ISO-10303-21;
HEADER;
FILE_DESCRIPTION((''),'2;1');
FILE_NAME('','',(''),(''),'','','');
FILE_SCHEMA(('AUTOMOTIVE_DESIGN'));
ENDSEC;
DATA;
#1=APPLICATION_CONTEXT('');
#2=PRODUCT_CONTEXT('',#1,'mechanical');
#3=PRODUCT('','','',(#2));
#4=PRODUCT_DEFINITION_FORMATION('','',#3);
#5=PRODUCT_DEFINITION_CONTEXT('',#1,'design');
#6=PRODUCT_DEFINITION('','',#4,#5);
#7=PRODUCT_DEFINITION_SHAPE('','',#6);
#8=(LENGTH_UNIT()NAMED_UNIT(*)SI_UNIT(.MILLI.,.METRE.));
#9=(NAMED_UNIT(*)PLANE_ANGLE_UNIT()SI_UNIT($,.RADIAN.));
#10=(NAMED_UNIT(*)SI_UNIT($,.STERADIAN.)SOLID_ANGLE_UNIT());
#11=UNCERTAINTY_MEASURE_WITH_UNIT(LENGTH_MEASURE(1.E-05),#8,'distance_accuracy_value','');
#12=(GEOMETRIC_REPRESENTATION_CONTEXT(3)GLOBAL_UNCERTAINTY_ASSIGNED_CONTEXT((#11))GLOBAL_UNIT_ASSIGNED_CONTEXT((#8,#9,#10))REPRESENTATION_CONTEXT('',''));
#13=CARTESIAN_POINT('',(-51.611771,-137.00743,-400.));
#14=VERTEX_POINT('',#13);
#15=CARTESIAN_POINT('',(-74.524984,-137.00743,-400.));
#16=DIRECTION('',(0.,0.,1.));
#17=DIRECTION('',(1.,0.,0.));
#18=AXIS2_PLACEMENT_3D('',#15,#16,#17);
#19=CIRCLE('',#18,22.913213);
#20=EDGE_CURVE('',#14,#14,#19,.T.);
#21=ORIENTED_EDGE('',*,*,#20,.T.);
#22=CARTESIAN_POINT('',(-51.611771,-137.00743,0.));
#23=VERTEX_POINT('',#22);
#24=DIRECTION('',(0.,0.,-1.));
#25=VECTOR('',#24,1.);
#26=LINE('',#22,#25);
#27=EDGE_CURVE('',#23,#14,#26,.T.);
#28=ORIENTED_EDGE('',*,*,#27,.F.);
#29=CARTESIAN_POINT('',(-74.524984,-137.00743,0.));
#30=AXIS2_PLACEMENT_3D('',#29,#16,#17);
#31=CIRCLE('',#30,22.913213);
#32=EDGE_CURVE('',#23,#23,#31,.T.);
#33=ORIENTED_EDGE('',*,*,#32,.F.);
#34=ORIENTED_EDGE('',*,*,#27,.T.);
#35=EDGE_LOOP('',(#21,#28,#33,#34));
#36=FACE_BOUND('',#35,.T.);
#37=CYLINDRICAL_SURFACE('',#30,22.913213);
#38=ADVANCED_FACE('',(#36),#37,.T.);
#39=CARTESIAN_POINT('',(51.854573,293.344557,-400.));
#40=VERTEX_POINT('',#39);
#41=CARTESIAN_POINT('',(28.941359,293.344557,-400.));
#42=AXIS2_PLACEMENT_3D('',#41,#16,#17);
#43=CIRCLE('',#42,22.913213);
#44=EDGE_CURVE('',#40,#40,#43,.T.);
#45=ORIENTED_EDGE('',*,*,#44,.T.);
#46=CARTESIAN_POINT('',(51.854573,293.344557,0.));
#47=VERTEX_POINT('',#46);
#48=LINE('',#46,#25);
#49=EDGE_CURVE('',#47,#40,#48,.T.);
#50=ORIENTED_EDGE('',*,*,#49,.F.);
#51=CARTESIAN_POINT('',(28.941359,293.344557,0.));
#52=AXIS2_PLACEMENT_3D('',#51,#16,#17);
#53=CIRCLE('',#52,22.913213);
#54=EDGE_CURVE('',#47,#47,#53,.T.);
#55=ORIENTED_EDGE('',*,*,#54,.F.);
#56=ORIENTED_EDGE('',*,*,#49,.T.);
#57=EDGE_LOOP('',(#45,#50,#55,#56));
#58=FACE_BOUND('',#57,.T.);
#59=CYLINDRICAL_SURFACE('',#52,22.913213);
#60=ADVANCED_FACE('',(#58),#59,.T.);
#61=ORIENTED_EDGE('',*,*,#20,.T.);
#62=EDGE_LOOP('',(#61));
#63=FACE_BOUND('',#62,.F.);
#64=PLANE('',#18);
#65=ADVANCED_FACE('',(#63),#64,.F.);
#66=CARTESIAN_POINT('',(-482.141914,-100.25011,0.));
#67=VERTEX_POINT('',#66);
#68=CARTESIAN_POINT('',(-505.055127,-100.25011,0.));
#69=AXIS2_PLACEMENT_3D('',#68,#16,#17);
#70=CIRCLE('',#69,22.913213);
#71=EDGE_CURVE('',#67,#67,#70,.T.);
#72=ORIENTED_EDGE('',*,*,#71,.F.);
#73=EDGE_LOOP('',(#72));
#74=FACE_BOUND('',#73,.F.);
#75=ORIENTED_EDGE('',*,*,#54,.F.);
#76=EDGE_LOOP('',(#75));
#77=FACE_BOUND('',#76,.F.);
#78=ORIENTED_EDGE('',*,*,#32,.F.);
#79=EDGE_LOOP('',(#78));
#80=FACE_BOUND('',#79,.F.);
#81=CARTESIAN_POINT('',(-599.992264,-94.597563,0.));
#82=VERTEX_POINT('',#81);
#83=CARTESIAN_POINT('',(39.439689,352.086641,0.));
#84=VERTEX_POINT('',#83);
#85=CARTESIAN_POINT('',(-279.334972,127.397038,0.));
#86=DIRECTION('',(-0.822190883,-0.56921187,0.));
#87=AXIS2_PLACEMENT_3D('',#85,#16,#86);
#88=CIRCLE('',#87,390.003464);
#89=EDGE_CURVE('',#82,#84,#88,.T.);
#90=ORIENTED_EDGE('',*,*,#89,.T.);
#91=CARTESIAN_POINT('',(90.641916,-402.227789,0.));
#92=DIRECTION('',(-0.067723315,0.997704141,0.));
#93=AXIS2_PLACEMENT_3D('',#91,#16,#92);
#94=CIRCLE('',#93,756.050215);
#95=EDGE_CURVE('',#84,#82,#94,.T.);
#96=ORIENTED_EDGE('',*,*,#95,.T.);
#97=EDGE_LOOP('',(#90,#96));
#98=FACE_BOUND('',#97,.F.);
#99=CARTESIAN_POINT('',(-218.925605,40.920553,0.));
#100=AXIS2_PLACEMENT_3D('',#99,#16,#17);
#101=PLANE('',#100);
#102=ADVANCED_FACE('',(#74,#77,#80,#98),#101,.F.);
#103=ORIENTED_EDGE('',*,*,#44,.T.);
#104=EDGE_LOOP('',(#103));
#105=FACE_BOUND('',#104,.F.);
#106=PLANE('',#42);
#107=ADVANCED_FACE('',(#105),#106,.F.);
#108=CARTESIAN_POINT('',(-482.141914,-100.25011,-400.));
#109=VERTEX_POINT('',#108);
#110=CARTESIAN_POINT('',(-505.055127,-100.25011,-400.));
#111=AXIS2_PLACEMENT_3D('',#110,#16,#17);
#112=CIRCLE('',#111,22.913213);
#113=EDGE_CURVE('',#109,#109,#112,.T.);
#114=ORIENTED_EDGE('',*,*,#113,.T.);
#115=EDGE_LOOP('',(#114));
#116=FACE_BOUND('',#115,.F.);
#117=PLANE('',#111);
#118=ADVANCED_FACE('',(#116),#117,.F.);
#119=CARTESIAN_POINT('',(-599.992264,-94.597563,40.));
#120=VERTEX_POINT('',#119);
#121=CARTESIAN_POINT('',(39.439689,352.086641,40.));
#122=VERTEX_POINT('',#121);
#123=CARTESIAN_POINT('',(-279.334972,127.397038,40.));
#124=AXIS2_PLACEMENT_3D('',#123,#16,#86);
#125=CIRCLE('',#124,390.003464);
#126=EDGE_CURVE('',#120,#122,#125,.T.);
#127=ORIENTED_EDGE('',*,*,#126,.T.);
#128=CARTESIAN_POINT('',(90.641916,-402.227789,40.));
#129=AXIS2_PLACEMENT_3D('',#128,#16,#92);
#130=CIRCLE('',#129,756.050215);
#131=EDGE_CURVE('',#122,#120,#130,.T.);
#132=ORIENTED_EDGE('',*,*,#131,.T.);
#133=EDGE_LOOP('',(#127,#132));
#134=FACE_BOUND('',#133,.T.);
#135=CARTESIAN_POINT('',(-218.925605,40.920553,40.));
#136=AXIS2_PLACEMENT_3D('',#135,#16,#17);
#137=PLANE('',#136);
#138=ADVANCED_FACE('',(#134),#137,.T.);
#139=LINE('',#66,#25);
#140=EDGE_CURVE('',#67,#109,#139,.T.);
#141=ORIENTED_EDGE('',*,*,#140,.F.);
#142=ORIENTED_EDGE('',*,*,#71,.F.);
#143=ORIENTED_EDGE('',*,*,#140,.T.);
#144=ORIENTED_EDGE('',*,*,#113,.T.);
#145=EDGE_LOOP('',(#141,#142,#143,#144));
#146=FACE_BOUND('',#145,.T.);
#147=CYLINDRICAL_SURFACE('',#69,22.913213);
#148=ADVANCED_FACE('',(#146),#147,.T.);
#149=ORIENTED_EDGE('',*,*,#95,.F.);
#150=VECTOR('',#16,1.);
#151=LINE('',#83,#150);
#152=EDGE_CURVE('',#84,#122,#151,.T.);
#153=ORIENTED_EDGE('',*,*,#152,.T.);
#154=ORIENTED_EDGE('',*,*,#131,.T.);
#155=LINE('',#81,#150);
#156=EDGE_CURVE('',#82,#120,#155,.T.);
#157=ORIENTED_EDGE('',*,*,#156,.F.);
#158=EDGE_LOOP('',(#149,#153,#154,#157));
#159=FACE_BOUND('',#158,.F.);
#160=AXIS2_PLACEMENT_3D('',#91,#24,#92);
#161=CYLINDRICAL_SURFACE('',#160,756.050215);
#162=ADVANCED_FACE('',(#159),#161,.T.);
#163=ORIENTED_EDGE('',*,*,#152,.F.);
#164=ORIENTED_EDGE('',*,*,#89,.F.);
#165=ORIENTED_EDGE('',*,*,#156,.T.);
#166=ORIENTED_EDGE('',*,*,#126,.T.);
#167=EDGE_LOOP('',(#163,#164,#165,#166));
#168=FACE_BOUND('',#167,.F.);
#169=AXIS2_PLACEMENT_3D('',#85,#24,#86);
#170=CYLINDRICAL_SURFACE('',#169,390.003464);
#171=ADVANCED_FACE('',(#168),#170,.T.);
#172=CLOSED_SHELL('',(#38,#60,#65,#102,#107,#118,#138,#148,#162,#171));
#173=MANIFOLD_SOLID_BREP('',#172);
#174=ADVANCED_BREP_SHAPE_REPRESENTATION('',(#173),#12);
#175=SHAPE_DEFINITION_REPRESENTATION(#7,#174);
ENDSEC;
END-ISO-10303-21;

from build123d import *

# Parameters (mm, degrees)
F0_R     = 22.9132131763
F1_DEPTH = 40
F2_DEPTH = 400


# Not quite as in the source:
# - a feature names something its author has since deleted; it is built from what else it names


with BuildPart() as f1:
    # F0 (on Top) → F1 (new body)
    with BuildSketch(Plane.XY):
        with BuildLine():
            ThreePointArc((-599.9922642108, -94.5975626578), (-55.9908868153, -192.3217779419), (39.4396888844, 352.0866405113))
            ThreePointArc((39.4396888844, 352.0866405113), (-342.3269144878, 217.5704996833), (-599.9922642108, -94.5975626578))
        make_face()
        with Locations((-505.0551273235, -100.2501100564)):
            Circle(F0_R, mode=Mode.SUBTRACT)
        with Locations((-74.5249837637, -137.0074301958)):
            Circle(F0_R, mode=Mode.SUBTRACT)
        with Locations((28.9413593709, 293.3445572853)):
            Circle(F0_R, mode=Mode.SUBTRACT)
        with Locations((28.9413593709, 293.3445572853)):
            Circle(F0_R)
        with Locations((-74.5249837637, -137.0074301958)):
            Circle(F0_R)
        with Locations((-505.0551273235, -100.2501100564)):
            Circle(F0_R)
    extrude(amount=F1_DEPTH)

    # F0 (on Top) → F2 (join)
    with BuildSketch(Plane.XY):
        with Locations((-505.0551273235, -100.2501100564)):
            Circle(F0_R)
        with Locations((-74.5249837637, -137.0074301958)):
            Circle(F0_R)
        with Locations((28.9413593709, 293.3445572853)):
            Circle(F0_R)
    extrude(amount=-F2_DEPTH)


solid = f1.part
